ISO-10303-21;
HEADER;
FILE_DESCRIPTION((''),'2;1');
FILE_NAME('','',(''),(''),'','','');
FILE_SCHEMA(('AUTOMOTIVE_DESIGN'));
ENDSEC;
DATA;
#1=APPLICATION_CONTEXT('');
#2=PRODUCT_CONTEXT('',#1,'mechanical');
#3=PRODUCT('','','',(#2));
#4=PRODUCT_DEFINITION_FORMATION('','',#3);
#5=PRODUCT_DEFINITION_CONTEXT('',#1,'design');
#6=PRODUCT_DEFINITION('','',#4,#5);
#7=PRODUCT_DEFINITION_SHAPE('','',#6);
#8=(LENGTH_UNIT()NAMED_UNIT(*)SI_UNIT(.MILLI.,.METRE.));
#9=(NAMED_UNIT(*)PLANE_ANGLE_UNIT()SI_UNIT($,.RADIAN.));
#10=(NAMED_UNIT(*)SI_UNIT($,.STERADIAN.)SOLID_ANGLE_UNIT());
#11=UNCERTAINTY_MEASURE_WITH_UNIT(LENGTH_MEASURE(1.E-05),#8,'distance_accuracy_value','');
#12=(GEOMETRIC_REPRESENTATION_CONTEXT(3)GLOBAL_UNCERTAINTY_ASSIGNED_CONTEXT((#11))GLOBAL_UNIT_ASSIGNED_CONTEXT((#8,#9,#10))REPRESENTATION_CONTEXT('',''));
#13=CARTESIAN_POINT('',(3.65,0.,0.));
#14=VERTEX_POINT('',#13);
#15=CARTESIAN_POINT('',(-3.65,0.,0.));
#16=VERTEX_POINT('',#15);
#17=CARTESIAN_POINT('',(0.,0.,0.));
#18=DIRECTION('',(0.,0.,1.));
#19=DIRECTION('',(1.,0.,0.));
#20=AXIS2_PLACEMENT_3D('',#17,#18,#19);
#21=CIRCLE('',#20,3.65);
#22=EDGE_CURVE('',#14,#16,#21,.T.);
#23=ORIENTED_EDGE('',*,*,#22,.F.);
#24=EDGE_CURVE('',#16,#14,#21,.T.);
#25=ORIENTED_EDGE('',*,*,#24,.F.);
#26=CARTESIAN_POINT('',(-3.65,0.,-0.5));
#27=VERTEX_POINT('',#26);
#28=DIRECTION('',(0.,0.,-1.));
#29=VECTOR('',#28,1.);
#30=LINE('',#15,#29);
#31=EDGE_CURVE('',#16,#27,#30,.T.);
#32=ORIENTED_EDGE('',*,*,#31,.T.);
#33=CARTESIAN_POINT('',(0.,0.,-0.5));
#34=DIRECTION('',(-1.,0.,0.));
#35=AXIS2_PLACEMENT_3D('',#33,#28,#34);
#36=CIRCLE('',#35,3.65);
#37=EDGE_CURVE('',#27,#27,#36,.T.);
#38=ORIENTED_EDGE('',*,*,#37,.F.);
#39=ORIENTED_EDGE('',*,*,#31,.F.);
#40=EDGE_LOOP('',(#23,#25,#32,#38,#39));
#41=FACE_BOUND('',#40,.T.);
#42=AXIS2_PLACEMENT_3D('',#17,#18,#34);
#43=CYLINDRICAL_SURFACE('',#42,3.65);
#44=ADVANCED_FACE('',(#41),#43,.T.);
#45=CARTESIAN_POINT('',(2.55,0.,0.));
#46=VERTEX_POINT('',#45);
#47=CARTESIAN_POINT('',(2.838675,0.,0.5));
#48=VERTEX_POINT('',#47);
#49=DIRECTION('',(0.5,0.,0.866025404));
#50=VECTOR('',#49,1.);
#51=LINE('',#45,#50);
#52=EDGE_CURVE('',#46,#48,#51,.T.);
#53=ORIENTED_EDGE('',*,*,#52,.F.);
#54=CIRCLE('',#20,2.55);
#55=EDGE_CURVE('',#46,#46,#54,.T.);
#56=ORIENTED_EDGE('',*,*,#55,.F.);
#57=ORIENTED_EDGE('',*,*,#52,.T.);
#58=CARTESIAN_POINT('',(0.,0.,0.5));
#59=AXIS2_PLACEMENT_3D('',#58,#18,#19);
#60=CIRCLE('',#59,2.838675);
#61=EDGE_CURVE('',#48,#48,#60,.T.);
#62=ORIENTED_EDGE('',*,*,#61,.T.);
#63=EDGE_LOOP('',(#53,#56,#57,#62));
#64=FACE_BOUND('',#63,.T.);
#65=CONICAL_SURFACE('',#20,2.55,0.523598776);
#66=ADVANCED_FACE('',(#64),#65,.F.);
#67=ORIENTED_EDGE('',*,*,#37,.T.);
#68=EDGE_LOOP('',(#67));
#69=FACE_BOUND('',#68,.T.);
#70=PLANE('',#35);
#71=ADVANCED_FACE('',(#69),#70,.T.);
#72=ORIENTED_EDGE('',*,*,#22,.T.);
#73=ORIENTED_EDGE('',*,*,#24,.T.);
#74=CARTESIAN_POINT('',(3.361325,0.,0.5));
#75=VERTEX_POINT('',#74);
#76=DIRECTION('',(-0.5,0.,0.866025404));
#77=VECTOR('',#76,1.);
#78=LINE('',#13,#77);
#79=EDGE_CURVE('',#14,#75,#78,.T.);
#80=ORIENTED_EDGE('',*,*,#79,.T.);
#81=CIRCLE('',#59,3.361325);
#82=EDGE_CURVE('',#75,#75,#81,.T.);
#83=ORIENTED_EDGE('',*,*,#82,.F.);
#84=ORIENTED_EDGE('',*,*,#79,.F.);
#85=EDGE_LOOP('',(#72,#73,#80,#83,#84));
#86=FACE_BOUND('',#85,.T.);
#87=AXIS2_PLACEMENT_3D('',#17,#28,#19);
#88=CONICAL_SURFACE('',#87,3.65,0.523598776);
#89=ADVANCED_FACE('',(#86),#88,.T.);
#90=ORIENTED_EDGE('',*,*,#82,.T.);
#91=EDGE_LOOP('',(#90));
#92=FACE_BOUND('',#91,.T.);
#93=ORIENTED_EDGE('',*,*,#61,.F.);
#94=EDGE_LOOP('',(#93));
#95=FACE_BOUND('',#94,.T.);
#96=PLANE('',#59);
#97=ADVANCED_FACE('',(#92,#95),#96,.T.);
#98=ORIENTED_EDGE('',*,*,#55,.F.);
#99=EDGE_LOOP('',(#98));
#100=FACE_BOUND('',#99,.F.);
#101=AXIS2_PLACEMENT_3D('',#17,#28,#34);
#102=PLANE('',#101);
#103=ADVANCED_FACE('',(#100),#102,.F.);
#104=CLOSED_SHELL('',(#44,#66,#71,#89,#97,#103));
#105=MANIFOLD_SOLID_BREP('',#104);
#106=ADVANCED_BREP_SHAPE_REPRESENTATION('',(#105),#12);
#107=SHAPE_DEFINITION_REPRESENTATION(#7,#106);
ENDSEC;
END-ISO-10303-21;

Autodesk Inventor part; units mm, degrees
ref_plane "YZ Plane" through (0, 0, 0) normal (1, 0, 0) x (0, 1, 0)
ref_plane "XZ Plane" through (0, 0, 0) normal (0, 1, 0) x (-1, 0, 0)
ref_plane "XY Plane" through (0, 0, 0) normal (0, 0, 1) x (1, 0, 0)
sketch "草圖1" plane through (0, 0, 0) normal (0, 0, 1) x (1, 0, 0)
  circle A0 centre (0, 0) radius 3.65
  circle A1 centre (0, 0) radius 2.55
  dimension "d0" = 7.3
  dimension "d1" = 1.1
extrude "擠出1" add sketch "草圖1" along normal blind 0.5 draft -30
sketch "草圖2" plane through (0, 0, 0) normal (0, 0, -1) x (-1, 0, 0)
  circle A0 centre (0, 0) radius 3.65
extrude "擠出2" add sketch "草圖2" along normal blind 0.5
properties part number "屋2 孔1"
